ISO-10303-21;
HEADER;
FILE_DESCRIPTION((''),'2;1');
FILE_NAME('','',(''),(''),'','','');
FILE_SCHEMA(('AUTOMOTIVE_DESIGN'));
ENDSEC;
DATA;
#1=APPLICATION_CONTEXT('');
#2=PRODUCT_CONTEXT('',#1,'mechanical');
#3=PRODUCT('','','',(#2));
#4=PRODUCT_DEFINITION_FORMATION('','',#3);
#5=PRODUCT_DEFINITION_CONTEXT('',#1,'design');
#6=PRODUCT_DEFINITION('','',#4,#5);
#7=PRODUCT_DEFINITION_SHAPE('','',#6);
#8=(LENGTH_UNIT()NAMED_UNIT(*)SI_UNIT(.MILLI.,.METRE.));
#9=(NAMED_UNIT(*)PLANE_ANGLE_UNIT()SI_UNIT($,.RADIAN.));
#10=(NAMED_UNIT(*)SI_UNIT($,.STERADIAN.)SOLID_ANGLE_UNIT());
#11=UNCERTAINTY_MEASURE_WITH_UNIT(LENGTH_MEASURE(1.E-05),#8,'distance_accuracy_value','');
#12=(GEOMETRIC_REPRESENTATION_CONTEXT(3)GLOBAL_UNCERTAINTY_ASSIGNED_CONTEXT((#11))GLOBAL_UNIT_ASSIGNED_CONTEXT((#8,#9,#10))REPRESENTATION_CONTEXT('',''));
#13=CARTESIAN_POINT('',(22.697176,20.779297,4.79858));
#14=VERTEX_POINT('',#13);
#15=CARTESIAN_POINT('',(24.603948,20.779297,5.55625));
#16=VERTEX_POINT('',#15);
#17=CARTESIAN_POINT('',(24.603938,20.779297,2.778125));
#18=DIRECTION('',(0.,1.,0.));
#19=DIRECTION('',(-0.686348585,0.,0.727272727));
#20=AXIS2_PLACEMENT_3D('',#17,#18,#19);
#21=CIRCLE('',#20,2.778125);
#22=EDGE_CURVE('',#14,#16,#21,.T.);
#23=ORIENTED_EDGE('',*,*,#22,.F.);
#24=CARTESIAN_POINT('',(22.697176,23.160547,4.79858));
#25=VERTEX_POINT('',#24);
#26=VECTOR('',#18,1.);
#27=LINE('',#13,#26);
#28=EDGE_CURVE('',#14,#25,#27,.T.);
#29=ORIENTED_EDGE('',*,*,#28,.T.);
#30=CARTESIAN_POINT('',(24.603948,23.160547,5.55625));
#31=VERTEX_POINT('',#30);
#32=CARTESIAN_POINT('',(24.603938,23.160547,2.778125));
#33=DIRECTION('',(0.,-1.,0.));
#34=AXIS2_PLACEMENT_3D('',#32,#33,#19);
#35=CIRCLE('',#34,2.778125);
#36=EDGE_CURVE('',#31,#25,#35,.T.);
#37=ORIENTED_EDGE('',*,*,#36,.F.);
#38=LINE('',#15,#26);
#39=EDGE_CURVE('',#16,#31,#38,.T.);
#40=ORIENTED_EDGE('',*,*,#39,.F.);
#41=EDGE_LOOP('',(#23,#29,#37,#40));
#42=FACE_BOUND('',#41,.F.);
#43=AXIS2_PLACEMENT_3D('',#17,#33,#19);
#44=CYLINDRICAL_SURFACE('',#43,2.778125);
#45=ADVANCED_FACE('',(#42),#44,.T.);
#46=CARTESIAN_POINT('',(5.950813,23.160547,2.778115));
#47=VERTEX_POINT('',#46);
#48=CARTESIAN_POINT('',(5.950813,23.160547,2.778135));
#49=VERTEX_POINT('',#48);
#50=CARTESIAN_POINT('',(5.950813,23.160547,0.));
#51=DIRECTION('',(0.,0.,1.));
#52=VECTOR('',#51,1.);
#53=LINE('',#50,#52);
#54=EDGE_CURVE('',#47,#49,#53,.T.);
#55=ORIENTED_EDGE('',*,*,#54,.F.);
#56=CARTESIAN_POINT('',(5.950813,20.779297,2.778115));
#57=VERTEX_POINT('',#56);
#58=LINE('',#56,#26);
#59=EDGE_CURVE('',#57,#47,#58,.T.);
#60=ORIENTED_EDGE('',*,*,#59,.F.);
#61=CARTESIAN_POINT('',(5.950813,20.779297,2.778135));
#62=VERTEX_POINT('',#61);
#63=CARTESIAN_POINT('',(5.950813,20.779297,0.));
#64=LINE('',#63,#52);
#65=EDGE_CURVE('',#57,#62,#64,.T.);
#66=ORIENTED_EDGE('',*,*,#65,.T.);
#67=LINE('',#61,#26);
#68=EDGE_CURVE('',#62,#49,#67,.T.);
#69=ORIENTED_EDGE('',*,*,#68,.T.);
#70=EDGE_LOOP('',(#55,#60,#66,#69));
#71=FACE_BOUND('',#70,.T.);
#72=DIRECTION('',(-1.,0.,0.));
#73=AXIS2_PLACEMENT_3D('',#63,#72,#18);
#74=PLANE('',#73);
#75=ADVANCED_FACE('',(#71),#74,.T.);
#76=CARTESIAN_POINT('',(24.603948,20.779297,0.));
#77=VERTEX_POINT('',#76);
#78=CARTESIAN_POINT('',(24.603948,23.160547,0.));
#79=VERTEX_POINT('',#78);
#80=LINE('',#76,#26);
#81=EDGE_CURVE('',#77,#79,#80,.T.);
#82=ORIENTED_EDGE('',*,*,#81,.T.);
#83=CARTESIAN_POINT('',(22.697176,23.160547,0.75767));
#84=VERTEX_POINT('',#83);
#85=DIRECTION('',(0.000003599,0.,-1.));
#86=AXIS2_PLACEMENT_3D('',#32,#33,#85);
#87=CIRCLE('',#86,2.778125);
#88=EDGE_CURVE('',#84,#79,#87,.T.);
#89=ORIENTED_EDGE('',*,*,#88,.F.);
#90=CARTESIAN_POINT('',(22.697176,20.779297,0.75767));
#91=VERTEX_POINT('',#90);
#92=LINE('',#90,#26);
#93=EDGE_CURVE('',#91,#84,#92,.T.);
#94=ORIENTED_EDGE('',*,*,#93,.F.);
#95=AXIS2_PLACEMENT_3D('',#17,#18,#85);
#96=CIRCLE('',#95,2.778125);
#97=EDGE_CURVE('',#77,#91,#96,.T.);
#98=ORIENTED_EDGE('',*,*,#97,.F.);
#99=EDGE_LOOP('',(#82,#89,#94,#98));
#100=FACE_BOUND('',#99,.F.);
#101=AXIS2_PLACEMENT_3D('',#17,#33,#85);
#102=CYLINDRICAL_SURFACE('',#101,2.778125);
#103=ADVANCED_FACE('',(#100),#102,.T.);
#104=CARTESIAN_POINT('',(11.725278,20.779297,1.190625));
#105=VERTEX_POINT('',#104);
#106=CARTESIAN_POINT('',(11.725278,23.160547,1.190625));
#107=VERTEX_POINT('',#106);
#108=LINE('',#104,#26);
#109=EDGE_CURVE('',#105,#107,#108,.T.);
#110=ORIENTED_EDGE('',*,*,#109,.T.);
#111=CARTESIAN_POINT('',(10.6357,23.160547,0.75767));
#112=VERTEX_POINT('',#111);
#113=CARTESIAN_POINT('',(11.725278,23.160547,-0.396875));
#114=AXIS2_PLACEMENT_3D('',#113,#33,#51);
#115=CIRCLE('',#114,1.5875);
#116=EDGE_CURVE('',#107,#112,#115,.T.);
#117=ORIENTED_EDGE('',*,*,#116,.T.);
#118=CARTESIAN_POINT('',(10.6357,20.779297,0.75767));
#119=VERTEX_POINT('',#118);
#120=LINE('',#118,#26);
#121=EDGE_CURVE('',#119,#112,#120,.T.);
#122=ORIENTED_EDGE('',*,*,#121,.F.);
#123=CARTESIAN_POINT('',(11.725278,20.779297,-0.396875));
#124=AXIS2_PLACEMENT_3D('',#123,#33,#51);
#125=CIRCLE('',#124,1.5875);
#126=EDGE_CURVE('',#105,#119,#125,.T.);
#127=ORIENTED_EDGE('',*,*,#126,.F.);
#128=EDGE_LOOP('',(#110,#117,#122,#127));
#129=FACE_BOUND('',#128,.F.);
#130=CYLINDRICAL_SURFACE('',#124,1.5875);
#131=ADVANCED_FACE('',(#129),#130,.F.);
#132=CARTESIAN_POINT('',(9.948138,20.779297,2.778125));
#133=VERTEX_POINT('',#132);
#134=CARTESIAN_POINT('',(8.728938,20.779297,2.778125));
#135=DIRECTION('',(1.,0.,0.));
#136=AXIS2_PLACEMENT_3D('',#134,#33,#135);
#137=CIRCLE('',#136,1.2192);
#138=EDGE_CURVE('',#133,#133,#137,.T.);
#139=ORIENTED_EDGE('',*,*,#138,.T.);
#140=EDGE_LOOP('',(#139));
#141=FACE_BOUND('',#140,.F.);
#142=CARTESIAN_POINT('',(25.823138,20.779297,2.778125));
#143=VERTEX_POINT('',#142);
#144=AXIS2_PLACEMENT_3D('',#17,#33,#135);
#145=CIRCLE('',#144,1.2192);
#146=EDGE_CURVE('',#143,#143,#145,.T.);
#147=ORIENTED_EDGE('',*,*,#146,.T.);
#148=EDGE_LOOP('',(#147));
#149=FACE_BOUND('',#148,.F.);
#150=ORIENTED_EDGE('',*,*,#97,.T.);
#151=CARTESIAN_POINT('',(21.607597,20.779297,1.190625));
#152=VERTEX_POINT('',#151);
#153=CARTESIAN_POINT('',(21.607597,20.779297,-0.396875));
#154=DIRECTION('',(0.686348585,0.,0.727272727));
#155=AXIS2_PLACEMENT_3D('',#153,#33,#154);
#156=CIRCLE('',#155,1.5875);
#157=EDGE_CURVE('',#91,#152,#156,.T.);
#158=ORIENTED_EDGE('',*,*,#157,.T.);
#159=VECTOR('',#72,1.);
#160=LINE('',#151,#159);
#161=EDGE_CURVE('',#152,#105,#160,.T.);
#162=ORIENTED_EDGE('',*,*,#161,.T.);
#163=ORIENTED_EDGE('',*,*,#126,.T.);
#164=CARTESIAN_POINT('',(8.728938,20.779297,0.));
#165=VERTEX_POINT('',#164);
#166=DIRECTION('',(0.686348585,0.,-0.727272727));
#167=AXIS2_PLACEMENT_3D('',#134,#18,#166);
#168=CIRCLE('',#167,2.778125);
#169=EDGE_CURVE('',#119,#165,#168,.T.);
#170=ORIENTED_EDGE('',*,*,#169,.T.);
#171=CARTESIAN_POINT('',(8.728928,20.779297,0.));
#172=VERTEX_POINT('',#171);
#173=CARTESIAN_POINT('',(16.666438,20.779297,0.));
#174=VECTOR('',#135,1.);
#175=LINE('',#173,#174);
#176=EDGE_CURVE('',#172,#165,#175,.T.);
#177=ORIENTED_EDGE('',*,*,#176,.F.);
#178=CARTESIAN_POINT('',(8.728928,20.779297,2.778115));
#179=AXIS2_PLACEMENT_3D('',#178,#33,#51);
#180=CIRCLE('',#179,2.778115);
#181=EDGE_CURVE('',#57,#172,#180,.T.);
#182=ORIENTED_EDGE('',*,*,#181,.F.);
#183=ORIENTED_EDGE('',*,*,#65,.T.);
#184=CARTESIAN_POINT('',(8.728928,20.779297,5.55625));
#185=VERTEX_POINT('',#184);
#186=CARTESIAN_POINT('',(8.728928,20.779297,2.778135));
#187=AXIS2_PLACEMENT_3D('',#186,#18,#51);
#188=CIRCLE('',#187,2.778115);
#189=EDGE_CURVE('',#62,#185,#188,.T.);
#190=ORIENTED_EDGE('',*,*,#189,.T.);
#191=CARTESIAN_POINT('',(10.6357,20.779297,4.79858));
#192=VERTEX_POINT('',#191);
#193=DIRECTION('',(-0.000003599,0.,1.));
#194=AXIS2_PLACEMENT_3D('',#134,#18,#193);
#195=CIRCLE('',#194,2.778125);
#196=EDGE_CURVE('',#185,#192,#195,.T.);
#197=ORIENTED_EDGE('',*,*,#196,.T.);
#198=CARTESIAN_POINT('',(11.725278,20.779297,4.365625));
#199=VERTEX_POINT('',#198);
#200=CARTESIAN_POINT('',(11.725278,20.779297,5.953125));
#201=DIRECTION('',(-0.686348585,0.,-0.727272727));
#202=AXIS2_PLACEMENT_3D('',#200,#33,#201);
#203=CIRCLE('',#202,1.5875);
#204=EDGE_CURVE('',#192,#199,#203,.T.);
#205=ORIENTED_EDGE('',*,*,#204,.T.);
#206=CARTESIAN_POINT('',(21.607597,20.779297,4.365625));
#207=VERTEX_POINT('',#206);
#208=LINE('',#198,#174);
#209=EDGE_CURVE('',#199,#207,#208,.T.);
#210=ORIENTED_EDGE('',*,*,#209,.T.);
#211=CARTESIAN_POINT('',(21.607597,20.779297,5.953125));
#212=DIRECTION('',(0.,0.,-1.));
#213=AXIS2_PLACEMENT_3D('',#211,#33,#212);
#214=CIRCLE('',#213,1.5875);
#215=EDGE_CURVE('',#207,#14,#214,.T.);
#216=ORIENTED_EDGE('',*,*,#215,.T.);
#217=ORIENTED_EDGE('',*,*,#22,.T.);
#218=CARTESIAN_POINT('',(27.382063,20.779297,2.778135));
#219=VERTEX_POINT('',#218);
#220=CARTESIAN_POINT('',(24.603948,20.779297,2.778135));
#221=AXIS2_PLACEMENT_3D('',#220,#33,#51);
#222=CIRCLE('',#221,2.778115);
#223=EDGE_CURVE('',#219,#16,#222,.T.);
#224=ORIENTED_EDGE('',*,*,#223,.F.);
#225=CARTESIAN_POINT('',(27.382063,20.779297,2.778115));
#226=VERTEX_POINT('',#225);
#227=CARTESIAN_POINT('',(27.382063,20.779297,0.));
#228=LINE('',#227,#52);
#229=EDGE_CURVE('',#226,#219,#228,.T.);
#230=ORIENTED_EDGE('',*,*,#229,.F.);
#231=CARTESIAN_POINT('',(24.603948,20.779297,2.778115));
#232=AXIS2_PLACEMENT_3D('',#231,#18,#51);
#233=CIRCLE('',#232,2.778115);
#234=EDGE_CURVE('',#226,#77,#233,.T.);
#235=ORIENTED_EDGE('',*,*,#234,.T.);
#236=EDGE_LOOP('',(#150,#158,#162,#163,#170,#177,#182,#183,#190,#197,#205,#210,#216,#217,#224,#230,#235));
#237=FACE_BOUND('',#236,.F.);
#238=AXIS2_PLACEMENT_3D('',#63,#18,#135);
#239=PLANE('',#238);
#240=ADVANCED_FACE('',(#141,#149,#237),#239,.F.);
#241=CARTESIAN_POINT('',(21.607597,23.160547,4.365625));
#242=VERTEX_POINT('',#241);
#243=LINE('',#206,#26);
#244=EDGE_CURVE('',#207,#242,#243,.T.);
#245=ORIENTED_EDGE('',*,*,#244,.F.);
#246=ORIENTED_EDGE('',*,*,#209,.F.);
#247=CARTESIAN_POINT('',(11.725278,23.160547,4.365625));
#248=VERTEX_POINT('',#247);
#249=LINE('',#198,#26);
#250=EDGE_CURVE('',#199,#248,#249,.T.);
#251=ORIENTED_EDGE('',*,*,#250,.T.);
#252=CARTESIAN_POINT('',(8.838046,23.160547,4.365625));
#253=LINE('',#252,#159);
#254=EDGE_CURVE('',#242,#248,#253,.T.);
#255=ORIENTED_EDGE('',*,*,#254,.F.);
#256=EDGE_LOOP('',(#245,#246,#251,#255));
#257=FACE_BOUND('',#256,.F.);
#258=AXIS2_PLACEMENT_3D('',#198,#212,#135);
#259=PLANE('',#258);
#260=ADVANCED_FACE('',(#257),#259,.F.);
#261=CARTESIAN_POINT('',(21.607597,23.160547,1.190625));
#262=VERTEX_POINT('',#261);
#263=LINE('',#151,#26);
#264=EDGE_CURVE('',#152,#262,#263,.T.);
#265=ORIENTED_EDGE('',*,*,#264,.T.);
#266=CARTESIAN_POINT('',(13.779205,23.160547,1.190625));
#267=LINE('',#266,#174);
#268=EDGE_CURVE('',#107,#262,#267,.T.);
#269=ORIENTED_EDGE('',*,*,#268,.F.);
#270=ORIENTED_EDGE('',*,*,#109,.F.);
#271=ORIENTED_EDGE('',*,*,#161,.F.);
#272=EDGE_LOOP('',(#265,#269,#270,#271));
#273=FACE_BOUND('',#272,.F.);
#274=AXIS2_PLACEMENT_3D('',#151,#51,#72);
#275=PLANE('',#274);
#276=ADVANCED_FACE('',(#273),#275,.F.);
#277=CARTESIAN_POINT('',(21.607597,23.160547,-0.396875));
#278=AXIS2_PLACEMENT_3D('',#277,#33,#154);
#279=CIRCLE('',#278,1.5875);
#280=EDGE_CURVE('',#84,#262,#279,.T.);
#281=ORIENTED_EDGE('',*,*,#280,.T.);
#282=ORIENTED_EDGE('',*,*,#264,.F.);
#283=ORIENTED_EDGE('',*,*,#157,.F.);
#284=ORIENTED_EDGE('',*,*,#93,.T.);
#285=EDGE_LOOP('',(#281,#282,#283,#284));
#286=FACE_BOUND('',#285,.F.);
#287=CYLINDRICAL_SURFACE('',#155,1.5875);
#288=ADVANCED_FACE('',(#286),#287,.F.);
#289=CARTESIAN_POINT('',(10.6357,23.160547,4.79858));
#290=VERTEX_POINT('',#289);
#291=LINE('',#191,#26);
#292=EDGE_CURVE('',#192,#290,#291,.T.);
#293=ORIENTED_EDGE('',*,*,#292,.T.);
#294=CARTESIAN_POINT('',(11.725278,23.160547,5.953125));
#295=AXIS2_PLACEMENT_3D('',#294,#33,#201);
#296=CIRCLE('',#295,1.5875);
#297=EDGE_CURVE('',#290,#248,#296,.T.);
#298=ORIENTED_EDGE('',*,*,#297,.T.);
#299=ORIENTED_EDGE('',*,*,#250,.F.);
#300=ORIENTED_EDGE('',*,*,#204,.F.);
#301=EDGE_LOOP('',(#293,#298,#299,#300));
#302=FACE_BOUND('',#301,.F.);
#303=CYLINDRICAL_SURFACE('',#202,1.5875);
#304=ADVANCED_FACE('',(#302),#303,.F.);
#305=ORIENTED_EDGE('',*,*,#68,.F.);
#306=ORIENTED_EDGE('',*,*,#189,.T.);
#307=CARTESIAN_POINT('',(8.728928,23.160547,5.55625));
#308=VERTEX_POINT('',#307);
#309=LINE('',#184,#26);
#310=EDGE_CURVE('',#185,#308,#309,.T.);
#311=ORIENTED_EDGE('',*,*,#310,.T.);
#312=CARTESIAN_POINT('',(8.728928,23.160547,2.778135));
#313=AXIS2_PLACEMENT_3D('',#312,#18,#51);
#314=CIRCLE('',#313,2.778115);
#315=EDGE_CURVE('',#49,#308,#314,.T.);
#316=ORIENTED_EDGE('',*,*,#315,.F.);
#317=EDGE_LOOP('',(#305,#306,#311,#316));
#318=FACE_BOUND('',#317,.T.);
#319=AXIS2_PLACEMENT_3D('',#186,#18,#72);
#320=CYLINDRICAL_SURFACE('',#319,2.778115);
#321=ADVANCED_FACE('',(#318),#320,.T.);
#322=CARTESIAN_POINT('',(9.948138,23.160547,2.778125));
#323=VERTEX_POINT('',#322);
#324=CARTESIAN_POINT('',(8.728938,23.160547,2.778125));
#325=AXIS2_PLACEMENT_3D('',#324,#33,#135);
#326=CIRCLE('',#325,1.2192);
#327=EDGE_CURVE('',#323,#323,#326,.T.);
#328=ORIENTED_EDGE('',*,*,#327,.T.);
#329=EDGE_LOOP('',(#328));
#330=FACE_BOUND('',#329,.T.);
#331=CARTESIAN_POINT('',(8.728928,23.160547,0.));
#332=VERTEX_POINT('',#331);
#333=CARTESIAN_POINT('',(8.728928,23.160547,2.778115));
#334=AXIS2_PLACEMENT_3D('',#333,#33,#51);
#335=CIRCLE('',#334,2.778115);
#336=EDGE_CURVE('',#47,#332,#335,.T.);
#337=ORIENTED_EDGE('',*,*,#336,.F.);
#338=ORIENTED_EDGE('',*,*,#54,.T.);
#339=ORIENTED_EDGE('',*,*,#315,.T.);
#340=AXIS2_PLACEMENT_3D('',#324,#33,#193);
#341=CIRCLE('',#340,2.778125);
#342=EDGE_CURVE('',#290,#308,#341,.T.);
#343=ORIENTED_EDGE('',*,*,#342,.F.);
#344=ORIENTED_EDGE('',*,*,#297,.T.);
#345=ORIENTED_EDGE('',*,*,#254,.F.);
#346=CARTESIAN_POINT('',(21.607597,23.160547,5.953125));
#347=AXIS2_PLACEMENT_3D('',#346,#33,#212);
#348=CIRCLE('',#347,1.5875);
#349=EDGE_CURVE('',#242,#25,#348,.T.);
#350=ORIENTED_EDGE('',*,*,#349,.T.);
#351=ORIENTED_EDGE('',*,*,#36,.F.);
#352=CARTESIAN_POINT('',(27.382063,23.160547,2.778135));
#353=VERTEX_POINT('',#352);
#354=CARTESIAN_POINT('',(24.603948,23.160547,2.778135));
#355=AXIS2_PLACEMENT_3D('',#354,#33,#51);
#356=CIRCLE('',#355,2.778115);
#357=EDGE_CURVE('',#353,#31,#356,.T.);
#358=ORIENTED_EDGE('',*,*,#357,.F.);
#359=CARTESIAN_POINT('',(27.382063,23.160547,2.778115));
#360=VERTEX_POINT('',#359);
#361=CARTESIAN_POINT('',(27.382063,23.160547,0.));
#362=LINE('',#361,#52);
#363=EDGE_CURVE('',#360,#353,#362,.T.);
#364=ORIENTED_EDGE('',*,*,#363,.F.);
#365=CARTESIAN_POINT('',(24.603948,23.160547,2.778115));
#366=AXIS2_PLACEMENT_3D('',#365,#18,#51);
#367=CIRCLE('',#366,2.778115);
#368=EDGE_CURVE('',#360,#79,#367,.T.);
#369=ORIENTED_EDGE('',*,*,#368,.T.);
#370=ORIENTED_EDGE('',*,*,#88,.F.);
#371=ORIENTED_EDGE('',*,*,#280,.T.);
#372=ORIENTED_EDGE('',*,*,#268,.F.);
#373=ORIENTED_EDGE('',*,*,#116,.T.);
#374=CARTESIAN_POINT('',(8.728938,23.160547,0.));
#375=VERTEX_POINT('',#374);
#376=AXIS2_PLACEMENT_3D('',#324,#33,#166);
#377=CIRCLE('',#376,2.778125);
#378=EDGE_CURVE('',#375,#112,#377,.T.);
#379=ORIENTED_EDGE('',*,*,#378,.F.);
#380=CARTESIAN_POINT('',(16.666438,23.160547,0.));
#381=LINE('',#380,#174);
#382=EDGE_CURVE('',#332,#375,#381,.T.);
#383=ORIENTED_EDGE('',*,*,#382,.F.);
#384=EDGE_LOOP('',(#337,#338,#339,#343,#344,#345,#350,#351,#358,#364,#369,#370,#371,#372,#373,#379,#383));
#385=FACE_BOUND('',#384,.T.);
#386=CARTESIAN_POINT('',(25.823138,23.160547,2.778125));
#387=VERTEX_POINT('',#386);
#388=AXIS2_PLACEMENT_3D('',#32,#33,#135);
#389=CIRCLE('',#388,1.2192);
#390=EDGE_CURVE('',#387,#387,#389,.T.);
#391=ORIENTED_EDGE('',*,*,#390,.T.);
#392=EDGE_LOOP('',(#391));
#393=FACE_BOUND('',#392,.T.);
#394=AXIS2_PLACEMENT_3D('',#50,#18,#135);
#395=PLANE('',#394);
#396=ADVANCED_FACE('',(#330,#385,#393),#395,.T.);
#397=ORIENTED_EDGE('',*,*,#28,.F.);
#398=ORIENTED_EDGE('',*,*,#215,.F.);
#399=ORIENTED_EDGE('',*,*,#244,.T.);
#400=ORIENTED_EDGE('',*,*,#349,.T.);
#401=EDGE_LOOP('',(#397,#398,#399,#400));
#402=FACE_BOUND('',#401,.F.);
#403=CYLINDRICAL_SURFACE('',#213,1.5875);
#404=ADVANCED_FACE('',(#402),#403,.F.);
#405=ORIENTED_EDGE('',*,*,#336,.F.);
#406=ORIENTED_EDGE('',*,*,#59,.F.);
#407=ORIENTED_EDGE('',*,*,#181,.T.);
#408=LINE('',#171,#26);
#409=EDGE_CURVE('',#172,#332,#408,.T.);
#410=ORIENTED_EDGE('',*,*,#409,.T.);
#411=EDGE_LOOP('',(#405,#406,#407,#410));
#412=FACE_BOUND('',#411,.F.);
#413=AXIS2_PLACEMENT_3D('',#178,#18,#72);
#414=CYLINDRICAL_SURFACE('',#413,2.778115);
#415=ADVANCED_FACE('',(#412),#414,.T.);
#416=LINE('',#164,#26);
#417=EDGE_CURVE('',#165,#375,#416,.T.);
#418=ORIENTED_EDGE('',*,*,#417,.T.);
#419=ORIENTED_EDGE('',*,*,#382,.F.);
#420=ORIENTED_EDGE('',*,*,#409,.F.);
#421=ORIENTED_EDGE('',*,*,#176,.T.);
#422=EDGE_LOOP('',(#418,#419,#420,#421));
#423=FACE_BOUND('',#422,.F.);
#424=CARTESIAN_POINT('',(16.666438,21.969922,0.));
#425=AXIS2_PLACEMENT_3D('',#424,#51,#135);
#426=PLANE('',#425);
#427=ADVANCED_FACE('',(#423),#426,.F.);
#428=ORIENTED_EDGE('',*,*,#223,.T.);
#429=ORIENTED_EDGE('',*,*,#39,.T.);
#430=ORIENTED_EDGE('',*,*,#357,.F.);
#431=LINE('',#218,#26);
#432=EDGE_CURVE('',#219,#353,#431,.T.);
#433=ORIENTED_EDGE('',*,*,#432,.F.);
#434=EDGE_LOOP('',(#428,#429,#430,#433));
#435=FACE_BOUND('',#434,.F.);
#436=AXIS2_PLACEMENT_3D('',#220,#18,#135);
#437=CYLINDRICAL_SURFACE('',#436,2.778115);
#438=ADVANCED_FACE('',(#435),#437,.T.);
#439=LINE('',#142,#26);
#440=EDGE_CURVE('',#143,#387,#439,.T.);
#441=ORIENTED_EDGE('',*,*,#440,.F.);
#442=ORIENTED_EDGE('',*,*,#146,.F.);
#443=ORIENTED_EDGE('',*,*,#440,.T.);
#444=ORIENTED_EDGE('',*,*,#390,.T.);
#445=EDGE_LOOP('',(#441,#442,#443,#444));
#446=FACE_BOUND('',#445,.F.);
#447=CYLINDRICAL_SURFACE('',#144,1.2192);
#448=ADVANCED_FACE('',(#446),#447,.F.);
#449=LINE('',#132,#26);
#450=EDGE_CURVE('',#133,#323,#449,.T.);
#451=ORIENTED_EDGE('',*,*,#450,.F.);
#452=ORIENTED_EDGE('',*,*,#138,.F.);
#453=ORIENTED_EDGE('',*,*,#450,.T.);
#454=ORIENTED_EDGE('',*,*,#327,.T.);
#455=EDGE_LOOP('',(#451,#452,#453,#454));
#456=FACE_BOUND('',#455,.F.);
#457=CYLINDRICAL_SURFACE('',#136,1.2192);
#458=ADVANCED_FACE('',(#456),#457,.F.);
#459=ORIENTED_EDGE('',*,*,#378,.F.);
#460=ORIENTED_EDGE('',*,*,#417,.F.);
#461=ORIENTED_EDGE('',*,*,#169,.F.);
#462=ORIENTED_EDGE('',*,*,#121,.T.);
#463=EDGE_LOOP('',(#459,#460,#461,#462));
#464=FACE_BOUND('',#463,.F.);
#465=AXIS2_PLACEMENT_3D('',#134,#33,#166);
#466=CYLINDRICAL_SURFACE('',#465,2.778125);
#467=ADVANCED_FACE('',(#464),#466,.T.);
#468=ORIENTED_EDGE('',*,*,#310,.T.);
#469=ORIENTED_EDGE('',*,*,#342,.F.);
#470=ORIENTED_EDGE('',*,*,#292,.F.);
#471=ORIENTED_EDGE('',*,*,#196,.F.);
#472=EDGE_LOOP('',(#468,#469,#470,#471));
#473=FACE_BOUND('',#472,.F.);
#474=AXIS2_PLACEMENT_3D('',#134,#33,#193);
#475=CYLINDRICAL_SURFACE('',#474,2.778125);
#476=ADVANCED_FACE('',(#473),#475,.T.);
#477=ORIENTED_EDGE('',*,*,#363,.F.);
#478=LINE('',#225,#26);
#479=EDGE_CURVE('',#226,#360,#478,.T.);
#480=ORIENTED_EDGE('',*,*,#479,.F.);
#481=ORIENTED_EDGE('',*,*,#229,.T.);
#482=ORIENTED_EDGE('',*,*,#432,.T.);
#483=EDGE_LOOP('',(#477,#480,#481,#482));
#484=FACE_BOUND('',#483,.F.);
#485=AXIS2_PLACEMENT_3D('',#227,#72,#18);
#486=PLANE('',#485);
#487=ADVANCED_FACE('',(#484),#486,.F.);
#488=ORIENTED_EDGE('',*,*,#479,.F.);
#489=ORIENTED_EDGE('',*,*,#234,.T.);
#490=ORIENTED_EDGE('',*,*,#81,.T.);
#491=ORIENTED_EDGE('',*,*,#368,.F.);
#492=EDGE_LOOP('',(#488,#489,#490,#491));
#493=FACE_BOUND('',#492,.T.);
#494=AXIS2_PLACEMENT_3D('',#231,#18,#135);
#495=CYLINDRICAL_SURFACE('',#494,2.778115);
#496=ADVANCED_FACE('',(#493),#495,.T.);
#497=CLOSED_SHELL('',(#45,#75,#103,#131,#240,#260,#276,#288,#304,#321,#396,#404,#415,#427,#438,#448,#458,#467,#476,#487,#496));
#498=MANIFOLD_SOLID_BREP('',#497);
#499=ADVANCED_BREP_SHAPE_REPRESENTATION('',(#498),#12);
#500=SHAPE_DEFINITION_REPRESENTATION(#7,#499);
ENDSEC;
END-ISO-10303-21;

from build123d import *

# Parameters (mm, degrees)
F0_W     = 21.43125
F0_H     = 2.38125
F1_DEPTH = 5.55625
F2_R     = 2.778115
F3_R     = 1.2192
F4_DEPTH = 25.4


# Not quite as in the source:
# - a fillet or chamfer is up to 0.001 mm smaller than in the source, because OpenCascade refuses the exact size
# - ends of sketch curves that miss each other by under 0.0002 mm in the source are joined


with BuildPart() as f1:
    # F0 (on Top) → F1 (new body)
    with BuildSketch(Plane.XY):
        with Locations((16.6664377481, 21.9699217558)):
            Rectangle(F0_W, F0_H)
    extrude(amount=F1_DEPTH)

    # F2 (radius 2.778125 in the source; OpenCascade refuses exactly that, so slightly less here)
    f2_edges = [f1.edges().sort_by_distance(p)[0] for p in [
        (27.382063, 21.969922, 5.55625),
        (27.382063, 21.969922, 0),
        (5.950813, 21.969922, 5.55625),
        (5.950813, 21.969922, 0),
    ]]
    fillet(f2_edges, radius=F2_R)

    # F3 (on face) → F4 (cut)
    with BuildSketch(Plane.XZ.offset(-20.7792967558)):
        with Locations((8.7289377481, 2.778125)):
            Circle(F3_R)
        with Locations((24.6039377481, 2.778125)):
            Circle(F3_R)
        with BuildLine():
            Line((24.6039477481, 5.55625), (8.7289277481, 5.55625))
            ThreePointArc((8.7289277481, 5.55625), (9.7548283932, 5.3598931731), (10.6356999108, 4.7985795455))
            ThreePointArc((10.6356999108, 4.7985795455), (11.1390550638, 4.4778289011), (11.7252782896, 4.365625))
            Line((11.7252782896, 4.365625), (21.6075972066, 4.365625))
            ThreePointArc((21.6075972066, 4.365625), (22.1938204324, 4.4778289011), (22.6971755853, 4.7985795455))
            ThreePointArc((22.6971755853, 4.7985795455), (23.5780471029, 5.3598931731), (24.6039477481, 5.55625))
        make_face()
        with BuildLine():
            ThreePointArc((10.6356999108, 0.7576704545), (9.7548283932, 0.1963568269), (8.7289377481, 0))
            Line((8.7289377481, 0), (24.6039477481, 0))
            ThreePointArc((24.6039477481, 0), (23.5780471029, 0.1963568269), (22.6971755853, 0.7576704545))
            ThreePointArc((22.6971755853, 0.7576704545), (22.1938204324, 1.0784210989), (21.6075972066, 1.190625))
            Line((21.6075972066, 1.190625), (11.7252782896, 1.190625))
            ThreePointArc((11.7252782896, 1.190625), (11.1390550638, 1.0784210989), (10.6356999108, 0.7576704545))
        make_face()
    extrude(amount=-F4_DEPTH, mode=Mode.SUBTRACT)


solid = f1.part
